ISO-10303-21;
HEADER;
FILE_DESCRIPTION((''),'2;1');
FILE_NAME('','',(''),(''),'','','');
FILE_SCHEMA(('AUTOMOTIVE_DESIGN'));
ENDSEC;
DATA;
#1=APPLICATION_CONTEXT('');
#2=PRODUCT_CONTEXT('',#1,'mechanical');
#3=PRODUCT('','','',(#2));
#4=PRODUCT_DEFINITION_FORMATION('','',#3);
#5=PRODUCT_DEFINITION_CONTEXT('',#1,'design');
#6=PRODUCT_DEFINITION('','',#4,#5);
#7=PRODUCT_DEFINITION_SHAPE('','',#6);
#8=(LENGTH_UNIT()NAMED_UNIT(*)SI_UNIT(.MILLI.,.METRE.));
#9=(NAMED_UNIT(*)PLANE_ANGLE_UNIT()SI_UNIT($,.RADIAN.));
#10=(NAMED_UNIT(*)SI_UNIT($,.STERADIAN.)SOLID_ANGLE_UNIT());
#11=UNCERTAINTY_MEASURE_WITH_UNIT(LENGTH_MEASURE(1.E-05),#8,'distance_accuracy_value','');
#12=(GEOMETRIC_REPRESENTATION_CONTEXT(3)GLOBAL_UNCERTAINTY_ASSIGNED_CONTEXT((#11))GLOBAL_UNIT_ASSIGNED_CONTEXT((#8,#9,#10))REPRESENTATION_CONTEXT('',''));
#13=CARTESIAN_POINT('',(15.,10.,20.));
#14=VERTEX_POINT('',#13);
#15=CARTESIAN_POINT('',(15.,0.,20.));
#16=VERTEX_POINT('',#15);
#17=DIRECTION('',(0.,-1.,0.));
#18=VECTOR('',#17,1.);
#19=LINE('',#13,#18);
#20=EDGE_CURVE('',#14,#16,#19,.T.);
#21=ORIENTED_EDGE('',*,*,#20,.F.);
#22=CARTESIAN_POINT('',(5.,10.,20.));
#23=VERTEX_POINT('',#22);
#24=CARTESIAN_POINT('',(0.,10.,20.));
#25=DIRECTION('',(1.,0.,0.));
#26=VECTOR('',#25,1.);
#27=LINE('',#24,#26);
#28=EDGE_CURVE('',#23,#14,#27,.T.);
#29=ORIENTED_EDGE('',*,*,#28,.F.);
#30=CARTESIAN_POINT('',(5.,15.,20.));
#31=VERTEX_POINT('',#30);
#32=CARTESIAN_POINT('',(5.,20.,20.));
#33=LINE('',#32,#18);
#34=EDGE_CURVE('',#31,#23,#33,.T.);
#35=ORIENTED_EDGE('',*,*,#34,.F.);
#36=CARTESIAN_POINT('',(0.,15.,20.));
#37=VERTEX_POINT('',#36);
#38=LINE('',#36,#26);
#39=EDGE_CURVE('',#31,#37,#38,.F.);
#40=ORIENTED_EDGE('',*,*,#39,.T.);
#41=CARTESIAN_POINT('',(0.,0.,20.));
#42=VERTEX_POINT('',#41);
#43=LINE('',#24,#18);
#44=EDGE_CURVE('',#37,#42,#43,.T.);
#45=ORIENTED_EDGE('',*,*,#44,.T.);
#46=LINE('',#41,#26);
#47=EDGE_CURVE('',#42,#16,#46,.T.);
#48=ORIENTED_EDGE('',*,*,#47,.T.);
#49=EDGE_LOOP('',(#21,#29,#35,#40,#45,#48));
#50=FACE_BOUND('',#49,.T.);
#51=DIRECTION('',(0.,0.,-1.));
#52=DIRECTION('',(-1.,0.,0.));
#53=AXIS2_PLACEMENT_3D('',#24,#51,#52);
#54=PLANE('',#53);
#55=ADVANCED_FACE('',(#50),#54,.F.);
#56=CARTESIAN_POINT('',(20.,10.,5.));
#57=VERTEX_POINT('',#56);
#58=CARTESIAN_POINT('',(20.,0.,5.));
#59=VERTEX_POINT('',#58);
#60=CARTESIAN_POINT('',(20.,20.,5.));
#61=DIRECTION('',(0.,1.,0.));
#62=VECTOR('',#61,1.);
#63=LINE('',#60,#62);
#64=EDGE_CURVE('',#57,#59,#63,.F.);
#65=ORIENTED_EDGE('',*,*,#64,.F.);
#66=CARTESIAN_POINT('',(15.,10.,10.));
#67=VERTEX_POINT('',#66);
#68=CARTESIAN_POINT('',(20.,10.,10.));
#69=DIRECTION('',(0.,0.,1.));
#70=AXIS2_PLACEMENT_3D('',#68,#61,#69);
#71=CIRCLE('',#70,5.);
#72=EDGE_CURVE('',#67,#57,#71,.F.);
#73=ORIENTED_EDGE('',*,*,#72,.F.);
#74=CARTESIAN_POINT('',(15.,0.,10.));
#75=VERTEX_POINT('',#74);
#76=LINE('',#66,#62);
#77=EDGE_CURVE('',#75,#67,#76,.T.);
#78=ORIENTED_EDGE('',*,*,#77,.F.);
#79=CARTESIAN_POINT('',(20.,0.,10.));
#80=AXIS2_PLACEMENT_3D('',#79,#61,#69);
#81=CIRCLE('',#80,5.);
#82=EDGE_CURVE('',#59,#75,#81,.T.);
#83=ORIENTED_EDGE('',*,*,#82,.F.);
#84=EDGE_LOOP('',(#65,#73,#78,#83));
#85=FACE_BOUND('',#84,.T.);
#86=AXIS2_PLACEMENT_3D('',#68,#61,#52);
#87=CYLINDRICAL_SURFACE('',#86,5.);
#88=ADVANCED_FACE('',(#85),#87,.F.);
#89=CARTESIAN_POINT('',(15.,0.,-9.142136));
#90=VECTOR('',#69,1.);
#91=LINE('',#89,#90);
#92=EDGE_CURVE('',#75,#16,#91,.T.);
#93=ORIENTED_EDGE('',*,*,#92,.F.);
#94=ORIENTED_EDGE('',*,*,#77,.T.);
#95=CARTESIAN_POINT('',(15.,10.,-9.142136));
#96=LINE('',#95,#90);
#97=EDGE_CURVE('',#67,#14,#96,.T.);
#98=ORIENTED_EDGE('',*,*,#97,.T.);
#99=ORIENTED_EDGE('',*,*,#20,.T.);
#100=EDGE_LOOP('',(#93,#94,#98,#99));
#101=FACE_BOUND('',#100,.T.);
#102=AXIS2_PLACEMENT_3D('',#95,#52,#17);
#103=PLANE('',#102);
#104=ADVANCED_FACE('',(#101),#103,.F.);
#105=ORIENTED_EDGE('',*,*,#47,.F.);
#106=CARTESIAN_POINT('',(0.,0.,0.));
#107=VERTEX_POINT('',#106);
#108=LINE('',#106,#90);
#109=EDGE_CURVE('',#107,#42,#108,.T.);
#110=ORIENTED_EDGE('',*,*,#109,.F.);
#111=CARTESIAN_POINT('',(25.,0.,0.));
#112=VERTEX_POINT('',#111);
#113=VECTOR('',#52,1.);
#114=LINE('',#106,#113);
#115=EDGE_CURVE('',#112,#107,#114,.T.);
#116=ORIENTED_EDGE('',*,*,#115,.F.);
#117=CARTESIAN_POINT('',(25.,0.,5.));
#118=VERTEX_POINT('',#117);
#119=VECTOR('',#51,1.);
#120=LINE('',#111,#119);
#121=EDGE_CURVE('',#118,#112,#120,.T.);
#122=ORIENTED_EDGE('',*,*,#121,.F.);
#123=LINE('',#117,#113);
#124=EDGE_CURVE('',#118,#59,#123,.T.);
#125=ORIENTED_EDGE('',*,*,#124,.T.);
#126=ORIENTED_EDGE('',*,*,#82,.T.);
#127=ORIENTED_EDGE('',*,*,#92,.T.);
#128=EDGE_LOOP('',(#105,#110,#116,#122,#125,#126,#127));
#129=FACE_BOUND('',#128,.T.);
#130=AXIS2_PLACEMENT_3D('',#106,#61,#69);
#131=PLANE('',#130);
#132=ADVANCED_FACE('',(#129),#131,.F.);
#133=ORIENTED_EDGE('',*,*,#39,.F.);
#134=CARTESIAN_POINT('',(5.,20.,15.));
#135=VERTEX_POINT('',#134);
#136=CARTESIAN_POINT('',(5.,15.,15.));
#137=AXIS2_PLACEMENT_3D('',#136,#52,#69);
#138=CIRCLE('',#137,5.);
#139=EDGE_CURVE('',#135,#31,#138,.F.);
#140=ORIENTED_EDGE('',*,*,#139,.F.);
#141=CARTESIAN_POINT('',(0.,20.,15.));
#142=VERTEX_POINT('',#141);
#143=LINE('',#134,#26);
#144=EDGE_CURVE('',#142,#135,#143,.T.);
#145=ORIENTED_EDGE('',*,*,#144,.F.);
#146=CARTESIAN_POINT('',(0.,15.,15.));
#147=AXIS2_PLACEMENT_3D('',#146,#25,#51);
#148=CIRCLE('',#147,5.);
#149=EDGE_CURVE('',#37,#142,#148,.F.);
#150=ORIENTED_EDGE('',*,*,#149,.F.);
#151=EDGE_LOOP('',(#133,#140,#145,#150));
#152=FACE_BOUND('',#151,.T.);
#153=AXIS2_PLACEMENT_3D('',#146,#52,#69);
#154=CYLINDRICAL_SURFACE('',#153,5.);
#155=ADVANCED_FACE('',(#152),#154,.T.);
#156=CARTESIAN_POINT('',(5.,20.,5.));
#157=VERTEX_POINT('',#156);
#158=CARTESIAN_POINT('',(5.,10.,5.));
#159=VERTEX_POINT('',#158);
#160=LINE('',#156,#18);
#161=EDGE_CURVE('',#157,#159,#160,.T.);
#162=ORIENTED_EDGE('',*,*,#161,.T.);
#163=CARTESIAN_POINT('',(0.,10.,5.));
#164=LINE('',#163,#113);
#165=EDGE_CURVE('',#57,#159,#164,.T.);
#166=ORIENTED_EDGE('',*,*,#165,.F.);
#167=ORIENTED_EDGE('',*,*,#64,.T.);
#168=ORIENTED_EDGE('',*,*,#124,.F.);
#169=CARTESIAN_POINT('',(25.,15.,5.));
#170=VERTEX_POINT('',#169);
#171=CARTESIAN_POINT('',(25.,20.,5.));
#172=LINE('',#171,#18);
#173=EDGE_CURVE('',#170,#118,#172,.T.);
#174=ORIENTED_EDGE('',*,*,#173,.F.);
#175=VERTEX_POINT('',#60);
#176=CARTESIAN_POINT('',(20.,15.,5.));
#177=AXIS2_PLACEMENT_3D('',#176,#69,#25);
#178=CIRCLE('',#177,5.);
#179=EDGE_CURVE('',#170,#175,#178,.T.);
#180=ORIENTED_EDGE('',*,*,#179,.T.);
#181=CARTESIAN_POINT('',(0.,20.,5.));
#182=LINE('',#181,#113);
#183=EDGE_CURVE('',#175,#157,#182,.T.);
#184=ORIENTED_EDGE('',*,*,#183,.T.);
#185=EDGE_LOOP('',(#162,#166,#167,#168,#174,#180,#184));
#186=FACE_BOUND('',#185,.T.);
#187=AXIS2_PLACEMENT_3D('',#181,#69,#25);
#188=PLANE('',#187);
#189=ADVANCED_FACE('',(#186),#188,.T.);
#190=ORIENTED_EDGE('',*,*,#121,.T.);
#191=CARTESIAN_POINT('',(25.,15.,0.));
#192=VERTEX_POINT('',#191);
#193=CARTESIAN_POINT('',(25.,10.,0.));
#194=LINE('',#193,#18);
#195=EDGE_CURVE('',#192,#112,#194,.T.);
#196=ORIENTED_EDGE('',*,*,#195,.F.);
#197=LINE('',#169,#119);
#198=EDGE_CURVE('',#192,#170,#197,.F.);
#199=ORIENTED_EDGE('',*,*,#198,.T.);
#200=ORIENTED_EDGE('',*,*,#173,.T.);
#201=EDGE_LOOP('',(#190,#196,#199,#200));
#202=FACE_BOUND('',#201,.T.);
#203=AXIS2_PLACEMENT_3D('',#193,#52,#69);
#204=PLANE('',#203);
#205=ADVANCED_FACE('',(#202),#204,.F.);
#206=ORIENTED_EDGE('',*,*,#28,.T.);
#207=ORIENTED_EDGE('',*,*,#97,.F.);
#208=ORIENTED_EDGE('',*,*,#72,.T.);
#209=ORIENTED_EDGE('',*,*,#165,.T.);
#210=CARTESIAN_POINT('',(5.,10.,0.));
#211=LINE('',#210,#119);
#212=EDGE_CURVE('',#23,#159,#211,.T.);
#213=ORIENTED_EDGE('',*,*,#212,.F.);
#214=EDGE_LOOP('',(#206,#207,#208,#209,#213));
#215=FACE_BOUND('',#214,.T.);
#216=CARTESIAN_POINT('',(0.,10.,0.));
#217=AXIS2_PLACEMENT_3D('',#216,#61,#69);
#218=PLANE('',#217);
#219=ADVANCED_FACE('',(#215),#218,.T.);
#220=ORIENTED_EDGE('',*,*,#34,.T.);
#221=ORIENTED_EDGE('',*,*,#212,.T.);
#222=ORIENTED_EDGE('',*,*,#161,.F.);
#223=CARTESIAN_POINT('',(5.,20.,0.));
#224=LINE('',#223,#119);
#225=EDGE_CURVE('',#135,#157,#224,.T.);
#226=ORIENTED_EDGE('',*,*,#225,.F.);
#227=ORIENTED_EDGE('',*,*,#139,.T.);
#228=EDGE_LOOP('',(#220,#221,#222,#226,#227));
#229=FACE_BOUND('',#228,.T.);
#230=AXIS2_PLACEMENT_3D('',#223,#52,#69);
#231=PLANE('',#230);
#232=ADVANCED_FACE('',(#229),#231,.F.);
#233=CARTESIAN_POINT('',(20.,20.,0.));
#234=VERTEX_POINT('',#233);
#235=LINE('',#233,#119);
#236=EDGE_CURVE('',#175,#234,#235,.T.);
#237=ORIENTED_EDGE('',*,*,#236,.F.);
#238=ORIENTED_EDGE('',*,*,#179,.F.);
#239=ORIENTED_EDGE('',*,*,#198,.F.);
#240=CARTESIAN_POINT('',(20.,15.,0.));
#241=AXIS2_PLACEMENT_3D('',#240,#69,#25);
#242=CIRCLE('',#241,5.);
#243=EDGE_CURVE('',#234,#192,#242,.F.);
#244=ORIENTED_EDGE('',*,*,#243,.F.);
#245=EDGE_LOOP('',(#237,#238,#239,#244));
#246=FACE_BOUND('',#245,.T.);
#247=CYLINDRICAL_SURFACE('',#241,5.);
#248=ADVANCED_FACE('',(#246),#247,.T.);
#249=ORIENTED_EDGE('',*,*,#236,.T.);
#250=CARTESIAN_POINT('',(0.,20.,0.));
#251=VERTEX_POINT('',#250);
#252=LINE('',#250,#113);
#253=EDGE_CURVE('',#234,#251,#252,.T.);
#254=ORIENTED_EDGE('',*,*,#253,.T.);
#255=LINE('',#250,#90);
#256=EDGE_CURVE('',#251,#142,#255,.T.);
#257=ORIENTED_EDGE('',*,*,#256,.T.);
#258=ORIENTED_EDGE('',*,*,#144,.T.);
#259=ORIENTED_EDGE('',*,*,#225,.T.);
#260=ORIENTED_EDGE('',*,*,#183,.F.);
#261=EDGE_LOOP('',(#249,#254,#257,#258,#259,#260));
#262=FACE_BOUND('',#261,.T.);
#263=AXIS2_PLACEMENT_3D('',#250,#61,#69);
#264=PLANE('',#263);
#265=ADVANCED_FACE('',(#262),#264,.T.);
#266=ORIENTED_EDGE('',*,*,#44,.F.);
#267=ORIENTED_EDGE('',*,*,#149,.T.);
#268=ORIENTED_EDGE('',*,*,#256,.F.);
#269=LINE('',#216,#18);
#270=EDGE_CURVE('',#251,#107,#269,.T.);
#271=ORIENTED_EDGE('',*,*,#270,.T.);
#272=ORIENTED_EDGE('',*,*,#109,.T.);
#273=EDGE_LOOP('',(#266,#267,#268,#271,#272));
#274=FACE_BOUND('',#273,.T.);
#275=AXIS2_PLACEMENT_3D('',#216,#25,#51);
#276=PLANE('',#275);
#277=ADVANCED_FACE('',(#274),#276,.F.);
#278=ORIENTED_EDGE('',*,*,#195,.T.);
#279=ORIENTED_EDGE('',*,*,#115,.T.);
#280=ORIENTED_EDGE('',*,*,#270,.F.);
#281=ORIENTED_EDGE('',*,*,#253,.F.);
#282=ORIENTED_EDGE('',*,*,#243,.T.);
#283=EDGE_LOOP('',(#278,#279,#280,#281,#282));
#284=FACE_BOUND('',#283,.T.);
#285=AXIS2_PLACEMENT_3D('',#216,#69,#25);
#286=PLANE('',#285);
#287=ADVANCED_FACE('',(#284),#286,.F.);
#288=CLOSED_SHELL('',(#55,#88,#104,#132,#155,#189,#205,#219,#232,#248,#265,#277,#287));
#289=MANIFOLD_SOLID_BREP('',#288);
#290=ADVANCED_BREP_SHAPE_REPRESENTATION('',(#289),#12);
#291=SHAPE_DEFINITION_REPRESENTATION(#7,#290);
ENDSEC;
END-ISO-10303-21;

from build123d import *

# Parameters (mm, degrees)
SKETCH_1_W          = 25
SKETCH_1_H          = 20
EXTRUDE_1_DEPTH     = 10
EXTRUDE_2_DEPTH     = 10
SKETCH_3_W          = 10
SKETCH_3_H          = 10
CUT_EXTRUDE_1_DEPTH = 15
FILLET_1_DEPTH      = 10
FILLET_START        = -1
FILLET_1_2_DEPTH    = 6
FILLET_1_3_DEPTH    = 6


with BuildPart() as part:
    # 草圖1 → 填料-伸長1 (new body)
    with BuildSketch(Plane(origin=(0, 0, 0), x_dir=(1, 0, 0), z_dir=(0, 1, 0))):
        with Locations((12.5, -10)):
            Rectangle(SKETCH_1_W, SKETCH_1_H)
    extrude(amount=EXTRUDE_1_DEPTH)

    # 草圖2 → 填料-伸長2 (add)
    with BuildSketch(Plane(origin=(0, 10, 0), x_dir=(1, 0, 0), z_dir=(0, 1, 0))):
        Polygon((0, 0), (0, -20), (5, -20), (5, -5), (25, -5), (25, 0), align=None)
    extrude(amount=EXTRUDE_2_DEPTH)

    # 草圖3 → 除料-伸長1 (cut)
    with BuildSketch(Plane.XY.offset(20)):
        with Locations((20, 5)):
            Rectangle(SKETCH_3_W, SKETCH_3_H)
    extrude(amount=-CUT_EXTRUDE_1_DEPTH, mode=Mode.SUBTRACT)

    # 圓角1: read off the stored shape, not the designer's step
    # 圓角1 outline → 圓角1 (add)
    with BuildSketch(Plane(origin=(0, 0, 0), x_dir=(1, 0, 0), z_dir=(0, 1, 0))):
        with BuildLine():
            ThreePointArc((15, -10), (16.464466094, -6.464466094), (20, -5))
            Line((20, -5), (15, -5))
            Line((15, -5), (15, -10))
        make_face()
    extrude(amount=FILLET_1_DEPTH)

    # Fillet 1 2 outline → Fillet 1 2 (cut)
    with BuildSketch(Plane.YZ.offset(FILLET_START)):
        with BuildLine():
            Line((20, 20), (15, 20))
            ThreePointArc((15, 20), (18.535533906, 18.535533906), (20, 15))
            Line((20, 15), (20, 20))
        make_face()
    extrude(amount=FILLET_1_2_DEPTH, mode=Mode.SUBTRACT)

    # Fillet 1 3 outline → Fillet 1 3 (cut)
    with BuildSketch(Plane.XY.offset(FILLET_START)):
        with BuildLine():
            ThreePointArc((20, 20), (23.535533906, 18.535533906), (25, 15))
            Line((25, 15), (25, 20))
            Line((25, 20), (20, 20))
        make_face()
    extrude(amount=FILLET_1_3_DEPTH, mode=Mode.SUBTRACT)


solid = part.part
